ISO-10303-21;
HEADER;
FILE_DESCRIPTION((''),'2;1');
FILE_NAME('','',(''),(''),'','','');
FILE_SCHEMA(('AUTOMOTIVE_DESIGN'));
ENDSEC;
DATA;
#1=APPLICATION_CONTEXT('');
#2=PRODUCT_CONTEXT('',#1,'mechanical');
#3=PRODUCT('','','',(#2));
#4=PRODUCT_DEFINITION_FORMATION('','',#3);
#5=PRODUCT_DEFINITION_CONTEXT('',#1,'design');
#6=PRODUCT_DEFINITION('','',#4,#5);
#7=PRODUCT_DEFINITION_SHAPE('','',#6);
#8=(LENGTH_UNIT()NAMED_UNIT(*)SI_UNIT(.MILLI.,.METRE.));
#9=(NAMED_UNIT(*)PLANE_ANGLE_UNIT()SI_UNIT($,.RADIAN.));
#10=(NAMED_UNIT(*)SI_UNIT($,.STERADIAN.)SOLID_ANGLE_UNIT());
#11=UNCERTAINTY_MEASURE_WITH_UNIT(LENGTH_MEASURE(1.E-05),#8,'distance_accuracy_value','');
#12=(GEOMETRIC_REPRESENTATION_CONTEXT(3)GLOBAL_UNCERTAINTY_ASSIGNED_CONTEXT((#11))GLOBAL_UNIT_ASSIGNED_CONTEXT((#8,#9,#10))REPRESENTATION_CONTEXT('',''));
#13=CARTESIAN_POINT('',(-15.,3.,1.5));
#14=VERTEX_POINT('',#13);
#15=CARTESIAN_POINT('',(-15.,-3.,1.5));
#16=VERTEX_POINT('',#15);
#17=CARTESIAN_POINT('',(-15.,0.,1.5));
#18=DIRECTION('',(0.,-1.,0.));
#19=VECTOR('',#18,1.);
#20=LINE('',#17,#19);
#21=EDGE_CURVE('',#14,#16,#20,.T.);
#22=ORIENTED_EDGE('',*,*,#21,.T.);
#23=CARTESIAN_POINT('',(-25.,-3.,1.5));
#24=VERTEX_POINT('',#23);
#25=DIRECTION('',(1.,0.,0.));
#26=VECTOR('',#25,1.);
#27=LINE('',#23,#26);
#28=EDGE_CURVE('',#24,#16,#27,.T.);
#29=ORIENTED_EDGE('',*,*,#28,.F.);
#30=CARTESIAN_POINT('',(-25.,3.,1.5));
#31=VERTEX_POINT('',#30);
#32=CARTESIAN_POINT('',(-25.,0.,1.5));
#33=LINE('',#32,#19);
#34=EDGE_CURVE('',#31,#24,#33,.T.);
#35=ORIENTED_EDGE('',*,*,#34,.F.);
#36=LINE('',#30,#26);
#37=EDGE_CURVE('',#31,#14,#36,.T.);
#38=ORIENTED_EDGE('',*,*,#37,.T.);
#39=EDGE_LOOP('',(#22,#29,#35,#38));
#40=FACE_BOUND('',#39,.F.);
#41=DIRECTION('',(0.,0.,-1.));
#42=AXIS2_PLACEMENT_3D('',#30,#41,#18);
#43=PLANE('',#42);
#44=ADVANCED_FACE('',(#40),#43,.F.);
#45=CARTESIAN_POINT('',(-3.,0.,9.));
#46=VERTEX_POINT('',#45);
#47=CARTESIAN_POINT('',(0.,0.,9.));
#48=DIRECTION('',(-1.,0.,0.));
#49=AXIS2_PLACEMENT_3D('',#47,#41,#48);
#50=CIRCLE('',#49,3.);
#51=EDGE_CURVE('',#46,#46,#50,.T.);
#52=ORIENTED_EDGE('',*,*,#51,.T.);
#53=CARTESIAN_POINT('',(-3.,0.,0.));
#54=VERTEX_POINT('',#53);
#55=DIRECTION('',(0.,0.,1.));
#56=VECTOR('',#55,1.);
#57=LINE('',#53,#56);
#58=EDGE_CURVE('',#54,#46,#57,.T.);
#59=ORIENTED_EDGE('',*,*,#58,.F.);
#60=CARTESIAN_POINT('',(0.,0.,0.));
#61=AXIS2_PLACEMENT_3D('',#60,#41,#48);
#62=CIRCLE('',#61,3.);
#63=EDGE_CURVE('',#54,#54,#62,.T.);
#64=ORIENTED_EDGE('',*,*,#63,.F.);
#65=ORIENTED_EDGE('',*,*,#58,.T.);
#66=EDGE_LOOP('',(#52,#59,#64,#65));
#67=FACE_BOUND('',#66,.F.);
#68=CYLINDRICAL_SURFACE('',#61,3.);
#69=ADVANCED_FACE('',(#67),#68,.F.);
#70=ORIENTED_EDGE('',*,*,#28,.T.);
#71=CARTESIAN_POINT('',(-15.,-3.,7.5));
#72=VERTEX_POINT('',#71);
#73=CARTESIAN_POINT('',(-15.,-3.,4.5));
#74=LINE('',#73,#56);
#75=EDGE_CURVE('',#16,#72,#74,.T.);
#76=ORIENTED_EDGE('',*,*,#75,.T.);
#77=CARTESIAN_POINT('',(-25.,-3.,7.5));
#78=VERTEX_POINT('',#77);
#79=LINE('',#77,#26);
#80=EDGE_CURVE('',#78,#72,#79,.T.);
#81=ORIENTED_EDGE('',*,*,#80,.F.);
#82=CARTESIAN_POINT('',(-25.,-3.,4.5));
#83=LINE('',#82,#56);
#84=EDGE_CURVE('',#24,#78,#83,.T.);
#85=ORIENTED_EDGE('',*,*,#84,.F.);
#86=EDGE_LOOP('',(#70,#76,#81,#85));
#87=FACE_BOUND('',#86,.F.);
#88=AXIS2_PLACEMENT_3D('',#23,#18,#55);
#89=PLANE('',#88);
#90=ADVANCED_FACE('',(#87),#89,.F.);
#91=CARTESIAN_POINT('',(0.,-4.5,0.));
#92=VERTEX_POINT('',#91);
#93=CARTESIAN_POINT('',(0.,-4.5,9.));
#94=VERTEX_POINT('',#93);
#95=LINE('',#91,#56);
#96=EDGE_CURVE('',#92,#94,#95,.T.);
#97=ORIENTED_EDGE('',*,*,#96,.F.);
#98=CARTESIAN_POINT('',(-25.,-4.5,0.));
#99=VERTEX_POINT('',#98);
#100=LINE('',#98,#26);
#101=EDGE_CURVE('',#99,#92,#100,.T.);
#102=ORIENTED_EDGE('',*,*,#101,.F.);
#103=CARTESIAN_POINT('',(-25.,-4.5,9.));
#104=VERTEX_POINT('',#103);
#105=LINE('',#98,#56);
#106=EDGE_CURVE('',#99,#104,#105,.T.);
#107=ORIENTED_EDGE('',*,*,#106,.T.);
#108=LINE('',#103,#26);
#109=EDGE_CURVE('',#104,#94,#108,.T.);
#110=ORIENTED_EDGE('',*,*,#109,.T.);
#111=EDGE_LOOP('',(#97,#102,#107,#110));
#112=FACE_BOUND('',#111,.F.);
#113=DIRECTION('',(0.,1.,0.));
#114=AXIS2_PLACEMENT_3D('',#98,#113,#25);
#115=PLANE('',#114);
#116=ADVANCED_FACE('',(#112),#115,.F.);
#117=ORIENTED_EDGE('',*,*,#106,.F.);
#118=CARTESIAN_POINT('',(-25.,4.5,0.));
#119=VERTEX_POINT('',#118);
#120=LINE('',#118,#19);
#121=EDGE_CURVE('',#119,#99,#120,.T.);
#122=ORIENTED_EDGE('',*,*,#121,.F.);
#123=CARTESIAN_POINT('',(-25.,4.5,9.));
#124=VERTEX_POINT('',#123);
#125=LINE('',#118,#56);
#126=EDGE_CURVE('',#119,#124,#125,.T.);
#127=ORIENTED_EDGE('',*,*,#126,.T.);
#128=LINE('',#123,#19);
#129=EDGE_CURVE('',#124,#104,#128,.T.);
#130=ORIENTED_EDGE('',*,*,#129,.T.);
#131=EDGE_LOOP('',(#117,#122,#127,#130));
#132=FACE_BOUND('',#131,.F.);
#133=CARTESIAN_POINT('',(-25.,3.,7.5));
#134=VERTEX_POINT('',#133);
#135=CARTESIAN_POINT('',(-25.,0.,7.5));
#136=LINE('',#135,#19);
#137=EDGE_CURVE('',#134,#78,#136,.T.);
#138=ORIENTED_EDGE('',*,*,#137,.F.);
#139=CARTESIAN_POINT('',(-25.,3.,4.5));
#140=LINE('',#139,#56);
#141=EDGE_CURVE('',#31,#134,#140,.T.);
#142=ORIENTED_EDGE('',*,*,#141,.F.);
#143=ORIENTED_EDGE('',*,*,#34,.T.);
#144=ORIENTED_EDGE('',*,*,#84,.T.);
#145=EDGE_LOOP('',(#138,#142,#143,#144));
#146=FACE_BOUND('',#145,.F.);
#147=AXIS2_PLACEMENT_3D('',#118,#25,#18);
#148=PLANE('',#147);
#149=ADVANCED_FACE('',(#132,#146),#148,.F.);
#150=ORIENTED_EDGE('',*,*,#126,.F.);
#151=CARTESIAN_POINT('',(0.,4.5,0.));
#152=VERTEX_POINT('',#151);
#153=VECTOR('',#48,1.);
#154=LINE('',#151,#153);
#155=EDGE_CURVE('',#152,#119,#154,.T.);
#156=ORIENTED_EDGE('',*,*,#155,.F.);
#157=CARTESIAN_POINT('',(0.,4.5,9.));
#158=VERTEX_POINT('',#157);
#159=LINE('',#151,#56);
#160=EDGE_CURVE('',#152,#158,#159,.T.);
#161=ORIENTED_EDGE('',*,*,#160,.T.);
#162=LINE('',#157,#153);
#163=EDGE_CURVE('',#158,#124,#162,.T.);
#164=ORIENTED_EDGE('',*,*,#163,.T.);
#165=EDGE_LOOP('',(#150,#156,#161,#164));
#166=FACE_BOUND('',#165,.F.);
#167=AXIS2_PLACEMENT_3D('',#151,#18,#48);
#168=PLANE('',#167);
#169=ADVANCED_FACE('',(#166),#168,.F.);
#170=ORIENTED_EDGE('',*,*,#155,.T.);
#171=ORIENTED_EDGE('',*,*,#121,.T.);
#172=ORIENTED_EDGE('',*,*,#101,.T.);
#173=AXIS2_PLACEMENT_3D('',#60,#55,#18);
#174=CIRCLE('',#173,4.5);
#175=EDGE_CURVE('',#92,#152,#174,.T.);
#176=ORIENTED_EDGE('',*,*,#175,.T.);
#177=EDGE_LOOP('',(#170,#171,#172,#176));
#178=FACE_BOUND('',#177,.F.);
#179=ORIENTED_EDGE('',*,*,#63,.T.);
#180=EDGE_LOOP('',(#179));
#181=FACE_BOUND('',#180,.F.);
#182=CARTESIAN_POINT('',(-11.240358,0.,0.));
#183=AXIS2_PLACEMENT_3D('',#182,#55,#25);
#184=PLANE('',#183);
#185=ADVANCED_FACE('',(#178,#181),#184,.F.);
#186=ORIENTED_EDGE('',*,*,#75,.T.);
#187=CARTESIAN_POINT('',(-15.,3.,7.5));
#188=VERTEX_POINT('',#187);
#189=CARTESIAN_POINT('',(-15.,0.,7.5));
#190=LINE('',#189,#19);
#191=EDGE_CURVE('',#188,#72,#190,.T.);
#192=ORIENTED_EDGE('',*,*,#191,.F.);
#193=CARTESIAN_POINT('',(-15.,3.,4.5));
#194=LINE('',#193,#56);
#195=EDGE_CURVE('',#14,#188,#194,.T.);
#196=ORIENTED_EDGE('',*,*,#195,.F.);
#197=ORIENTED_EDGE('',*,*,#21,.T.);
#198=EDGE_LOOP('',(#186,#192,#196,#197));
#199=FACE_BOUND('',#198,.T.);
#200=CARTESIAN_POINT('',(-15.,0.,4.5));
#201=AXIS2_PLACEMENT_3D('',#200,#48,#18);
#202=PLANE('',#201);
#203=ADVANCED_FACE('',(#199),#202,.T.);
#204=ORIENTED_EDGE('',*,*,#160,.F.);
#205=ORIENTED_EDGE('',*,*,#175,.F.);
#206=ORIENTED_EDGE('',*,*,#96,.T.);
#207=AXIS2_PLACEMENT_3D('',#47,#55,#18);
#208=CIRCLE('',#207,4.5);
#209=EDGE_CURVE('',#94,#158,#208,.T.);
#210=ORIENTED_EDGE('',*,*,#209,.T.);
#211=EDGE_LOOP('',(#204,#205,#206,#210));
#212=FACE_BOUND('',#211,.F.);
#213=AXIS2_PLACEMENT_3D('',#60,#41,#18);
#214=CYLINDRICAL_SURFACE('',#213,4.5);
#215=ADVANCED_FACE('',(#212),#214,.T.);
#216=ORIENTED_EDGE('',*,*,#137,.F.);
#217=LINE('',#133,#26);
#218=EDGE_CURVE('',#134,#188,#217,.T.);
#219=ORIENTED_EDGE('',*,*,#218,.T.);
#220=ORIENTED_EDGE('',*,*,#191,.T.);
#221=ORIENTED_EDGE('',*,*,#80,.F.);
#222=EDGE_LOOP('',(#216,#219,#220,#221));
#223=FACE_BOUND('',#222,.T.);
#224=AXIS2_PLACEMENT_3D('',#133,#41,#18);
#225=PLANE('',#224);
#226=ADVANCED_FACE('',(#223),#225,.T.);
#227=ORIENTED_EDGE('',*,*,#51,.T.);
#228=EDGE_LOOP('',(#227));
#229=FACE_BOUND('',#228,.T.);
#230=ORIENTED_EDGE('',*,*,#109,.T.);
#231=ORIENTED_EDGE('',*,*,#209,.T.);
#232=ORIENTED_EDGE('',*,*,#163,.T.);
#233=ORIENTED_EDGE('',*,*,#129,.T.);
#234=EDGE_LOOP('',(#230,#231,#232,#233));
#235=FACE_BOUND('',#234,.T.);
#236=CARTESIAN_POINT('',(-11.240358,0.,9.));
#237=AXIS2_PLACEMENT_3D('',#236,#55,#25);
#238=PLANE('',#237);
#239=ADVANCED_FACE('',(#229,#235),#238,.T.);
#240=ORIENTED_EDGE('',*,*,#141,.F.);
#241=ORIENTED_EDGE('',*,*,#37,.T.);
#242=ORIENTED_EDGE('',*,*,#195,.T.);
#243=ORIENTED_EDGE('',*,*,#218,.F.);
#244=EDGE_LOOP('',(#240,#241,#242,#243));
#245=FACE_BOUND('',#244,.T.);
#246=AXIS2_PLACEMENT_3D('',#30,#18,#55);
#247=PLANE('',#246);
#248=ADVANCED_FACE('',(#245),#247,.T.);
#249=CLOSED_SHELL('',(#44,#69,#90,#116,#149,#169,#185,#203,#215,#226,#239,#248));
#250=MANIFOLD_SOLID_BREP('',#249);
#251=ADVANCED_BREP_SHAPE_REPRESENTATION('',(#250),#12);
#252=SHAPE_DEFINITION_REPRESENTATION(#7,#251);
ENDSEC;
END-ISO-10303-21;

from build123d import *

# Parameters (mm, degrees)
F1_DEPTH = 9
F2_W     = 6
F2_H     = 6
F3_DEPTH = 10


# Not quite as in the source:
# - a feature names something its author has since deleted; it is built from what else it names


with BuildPart() as f1:
    # F0 (on Top) → F1 (new body)
    with BuildSketch(Plane.XY):
        with BuildLine():
            Line((-25, -4.5), (0, -4.5))
            ThreePointArc((0, -4.5), (4.5, 0), (0, 4.5))
            Line((0, 4.5), (-25, 4.5))
            Line((-25, 4.5), (-25, 0))
            Line((-25, 0), (-25, -4.5))
        make_face()
        with BuildLine():
            ThreePointArc((3, 0), (0, -3), (-3, 0))
            ThreePointArc((-3, 0), (0, 3), (3, 0))
        make_face(mode=Mode.SUBTRACT)
    extrude(amount=F1_DEPTH)

    # F2 (on face) → F3 (cut)
    with BuildSketch(Plane(origin=(-25, 0, 0), x_dir=(0, -1, 0), z_dir=(-1, 0, 0))):
        with Locations((0, 4.5)):
            Rectangle(F2_W, F2_H)
    extrude(amount=-F3_DEPTH, mode=Mode.SUBTRACT)


solid = f1.part
